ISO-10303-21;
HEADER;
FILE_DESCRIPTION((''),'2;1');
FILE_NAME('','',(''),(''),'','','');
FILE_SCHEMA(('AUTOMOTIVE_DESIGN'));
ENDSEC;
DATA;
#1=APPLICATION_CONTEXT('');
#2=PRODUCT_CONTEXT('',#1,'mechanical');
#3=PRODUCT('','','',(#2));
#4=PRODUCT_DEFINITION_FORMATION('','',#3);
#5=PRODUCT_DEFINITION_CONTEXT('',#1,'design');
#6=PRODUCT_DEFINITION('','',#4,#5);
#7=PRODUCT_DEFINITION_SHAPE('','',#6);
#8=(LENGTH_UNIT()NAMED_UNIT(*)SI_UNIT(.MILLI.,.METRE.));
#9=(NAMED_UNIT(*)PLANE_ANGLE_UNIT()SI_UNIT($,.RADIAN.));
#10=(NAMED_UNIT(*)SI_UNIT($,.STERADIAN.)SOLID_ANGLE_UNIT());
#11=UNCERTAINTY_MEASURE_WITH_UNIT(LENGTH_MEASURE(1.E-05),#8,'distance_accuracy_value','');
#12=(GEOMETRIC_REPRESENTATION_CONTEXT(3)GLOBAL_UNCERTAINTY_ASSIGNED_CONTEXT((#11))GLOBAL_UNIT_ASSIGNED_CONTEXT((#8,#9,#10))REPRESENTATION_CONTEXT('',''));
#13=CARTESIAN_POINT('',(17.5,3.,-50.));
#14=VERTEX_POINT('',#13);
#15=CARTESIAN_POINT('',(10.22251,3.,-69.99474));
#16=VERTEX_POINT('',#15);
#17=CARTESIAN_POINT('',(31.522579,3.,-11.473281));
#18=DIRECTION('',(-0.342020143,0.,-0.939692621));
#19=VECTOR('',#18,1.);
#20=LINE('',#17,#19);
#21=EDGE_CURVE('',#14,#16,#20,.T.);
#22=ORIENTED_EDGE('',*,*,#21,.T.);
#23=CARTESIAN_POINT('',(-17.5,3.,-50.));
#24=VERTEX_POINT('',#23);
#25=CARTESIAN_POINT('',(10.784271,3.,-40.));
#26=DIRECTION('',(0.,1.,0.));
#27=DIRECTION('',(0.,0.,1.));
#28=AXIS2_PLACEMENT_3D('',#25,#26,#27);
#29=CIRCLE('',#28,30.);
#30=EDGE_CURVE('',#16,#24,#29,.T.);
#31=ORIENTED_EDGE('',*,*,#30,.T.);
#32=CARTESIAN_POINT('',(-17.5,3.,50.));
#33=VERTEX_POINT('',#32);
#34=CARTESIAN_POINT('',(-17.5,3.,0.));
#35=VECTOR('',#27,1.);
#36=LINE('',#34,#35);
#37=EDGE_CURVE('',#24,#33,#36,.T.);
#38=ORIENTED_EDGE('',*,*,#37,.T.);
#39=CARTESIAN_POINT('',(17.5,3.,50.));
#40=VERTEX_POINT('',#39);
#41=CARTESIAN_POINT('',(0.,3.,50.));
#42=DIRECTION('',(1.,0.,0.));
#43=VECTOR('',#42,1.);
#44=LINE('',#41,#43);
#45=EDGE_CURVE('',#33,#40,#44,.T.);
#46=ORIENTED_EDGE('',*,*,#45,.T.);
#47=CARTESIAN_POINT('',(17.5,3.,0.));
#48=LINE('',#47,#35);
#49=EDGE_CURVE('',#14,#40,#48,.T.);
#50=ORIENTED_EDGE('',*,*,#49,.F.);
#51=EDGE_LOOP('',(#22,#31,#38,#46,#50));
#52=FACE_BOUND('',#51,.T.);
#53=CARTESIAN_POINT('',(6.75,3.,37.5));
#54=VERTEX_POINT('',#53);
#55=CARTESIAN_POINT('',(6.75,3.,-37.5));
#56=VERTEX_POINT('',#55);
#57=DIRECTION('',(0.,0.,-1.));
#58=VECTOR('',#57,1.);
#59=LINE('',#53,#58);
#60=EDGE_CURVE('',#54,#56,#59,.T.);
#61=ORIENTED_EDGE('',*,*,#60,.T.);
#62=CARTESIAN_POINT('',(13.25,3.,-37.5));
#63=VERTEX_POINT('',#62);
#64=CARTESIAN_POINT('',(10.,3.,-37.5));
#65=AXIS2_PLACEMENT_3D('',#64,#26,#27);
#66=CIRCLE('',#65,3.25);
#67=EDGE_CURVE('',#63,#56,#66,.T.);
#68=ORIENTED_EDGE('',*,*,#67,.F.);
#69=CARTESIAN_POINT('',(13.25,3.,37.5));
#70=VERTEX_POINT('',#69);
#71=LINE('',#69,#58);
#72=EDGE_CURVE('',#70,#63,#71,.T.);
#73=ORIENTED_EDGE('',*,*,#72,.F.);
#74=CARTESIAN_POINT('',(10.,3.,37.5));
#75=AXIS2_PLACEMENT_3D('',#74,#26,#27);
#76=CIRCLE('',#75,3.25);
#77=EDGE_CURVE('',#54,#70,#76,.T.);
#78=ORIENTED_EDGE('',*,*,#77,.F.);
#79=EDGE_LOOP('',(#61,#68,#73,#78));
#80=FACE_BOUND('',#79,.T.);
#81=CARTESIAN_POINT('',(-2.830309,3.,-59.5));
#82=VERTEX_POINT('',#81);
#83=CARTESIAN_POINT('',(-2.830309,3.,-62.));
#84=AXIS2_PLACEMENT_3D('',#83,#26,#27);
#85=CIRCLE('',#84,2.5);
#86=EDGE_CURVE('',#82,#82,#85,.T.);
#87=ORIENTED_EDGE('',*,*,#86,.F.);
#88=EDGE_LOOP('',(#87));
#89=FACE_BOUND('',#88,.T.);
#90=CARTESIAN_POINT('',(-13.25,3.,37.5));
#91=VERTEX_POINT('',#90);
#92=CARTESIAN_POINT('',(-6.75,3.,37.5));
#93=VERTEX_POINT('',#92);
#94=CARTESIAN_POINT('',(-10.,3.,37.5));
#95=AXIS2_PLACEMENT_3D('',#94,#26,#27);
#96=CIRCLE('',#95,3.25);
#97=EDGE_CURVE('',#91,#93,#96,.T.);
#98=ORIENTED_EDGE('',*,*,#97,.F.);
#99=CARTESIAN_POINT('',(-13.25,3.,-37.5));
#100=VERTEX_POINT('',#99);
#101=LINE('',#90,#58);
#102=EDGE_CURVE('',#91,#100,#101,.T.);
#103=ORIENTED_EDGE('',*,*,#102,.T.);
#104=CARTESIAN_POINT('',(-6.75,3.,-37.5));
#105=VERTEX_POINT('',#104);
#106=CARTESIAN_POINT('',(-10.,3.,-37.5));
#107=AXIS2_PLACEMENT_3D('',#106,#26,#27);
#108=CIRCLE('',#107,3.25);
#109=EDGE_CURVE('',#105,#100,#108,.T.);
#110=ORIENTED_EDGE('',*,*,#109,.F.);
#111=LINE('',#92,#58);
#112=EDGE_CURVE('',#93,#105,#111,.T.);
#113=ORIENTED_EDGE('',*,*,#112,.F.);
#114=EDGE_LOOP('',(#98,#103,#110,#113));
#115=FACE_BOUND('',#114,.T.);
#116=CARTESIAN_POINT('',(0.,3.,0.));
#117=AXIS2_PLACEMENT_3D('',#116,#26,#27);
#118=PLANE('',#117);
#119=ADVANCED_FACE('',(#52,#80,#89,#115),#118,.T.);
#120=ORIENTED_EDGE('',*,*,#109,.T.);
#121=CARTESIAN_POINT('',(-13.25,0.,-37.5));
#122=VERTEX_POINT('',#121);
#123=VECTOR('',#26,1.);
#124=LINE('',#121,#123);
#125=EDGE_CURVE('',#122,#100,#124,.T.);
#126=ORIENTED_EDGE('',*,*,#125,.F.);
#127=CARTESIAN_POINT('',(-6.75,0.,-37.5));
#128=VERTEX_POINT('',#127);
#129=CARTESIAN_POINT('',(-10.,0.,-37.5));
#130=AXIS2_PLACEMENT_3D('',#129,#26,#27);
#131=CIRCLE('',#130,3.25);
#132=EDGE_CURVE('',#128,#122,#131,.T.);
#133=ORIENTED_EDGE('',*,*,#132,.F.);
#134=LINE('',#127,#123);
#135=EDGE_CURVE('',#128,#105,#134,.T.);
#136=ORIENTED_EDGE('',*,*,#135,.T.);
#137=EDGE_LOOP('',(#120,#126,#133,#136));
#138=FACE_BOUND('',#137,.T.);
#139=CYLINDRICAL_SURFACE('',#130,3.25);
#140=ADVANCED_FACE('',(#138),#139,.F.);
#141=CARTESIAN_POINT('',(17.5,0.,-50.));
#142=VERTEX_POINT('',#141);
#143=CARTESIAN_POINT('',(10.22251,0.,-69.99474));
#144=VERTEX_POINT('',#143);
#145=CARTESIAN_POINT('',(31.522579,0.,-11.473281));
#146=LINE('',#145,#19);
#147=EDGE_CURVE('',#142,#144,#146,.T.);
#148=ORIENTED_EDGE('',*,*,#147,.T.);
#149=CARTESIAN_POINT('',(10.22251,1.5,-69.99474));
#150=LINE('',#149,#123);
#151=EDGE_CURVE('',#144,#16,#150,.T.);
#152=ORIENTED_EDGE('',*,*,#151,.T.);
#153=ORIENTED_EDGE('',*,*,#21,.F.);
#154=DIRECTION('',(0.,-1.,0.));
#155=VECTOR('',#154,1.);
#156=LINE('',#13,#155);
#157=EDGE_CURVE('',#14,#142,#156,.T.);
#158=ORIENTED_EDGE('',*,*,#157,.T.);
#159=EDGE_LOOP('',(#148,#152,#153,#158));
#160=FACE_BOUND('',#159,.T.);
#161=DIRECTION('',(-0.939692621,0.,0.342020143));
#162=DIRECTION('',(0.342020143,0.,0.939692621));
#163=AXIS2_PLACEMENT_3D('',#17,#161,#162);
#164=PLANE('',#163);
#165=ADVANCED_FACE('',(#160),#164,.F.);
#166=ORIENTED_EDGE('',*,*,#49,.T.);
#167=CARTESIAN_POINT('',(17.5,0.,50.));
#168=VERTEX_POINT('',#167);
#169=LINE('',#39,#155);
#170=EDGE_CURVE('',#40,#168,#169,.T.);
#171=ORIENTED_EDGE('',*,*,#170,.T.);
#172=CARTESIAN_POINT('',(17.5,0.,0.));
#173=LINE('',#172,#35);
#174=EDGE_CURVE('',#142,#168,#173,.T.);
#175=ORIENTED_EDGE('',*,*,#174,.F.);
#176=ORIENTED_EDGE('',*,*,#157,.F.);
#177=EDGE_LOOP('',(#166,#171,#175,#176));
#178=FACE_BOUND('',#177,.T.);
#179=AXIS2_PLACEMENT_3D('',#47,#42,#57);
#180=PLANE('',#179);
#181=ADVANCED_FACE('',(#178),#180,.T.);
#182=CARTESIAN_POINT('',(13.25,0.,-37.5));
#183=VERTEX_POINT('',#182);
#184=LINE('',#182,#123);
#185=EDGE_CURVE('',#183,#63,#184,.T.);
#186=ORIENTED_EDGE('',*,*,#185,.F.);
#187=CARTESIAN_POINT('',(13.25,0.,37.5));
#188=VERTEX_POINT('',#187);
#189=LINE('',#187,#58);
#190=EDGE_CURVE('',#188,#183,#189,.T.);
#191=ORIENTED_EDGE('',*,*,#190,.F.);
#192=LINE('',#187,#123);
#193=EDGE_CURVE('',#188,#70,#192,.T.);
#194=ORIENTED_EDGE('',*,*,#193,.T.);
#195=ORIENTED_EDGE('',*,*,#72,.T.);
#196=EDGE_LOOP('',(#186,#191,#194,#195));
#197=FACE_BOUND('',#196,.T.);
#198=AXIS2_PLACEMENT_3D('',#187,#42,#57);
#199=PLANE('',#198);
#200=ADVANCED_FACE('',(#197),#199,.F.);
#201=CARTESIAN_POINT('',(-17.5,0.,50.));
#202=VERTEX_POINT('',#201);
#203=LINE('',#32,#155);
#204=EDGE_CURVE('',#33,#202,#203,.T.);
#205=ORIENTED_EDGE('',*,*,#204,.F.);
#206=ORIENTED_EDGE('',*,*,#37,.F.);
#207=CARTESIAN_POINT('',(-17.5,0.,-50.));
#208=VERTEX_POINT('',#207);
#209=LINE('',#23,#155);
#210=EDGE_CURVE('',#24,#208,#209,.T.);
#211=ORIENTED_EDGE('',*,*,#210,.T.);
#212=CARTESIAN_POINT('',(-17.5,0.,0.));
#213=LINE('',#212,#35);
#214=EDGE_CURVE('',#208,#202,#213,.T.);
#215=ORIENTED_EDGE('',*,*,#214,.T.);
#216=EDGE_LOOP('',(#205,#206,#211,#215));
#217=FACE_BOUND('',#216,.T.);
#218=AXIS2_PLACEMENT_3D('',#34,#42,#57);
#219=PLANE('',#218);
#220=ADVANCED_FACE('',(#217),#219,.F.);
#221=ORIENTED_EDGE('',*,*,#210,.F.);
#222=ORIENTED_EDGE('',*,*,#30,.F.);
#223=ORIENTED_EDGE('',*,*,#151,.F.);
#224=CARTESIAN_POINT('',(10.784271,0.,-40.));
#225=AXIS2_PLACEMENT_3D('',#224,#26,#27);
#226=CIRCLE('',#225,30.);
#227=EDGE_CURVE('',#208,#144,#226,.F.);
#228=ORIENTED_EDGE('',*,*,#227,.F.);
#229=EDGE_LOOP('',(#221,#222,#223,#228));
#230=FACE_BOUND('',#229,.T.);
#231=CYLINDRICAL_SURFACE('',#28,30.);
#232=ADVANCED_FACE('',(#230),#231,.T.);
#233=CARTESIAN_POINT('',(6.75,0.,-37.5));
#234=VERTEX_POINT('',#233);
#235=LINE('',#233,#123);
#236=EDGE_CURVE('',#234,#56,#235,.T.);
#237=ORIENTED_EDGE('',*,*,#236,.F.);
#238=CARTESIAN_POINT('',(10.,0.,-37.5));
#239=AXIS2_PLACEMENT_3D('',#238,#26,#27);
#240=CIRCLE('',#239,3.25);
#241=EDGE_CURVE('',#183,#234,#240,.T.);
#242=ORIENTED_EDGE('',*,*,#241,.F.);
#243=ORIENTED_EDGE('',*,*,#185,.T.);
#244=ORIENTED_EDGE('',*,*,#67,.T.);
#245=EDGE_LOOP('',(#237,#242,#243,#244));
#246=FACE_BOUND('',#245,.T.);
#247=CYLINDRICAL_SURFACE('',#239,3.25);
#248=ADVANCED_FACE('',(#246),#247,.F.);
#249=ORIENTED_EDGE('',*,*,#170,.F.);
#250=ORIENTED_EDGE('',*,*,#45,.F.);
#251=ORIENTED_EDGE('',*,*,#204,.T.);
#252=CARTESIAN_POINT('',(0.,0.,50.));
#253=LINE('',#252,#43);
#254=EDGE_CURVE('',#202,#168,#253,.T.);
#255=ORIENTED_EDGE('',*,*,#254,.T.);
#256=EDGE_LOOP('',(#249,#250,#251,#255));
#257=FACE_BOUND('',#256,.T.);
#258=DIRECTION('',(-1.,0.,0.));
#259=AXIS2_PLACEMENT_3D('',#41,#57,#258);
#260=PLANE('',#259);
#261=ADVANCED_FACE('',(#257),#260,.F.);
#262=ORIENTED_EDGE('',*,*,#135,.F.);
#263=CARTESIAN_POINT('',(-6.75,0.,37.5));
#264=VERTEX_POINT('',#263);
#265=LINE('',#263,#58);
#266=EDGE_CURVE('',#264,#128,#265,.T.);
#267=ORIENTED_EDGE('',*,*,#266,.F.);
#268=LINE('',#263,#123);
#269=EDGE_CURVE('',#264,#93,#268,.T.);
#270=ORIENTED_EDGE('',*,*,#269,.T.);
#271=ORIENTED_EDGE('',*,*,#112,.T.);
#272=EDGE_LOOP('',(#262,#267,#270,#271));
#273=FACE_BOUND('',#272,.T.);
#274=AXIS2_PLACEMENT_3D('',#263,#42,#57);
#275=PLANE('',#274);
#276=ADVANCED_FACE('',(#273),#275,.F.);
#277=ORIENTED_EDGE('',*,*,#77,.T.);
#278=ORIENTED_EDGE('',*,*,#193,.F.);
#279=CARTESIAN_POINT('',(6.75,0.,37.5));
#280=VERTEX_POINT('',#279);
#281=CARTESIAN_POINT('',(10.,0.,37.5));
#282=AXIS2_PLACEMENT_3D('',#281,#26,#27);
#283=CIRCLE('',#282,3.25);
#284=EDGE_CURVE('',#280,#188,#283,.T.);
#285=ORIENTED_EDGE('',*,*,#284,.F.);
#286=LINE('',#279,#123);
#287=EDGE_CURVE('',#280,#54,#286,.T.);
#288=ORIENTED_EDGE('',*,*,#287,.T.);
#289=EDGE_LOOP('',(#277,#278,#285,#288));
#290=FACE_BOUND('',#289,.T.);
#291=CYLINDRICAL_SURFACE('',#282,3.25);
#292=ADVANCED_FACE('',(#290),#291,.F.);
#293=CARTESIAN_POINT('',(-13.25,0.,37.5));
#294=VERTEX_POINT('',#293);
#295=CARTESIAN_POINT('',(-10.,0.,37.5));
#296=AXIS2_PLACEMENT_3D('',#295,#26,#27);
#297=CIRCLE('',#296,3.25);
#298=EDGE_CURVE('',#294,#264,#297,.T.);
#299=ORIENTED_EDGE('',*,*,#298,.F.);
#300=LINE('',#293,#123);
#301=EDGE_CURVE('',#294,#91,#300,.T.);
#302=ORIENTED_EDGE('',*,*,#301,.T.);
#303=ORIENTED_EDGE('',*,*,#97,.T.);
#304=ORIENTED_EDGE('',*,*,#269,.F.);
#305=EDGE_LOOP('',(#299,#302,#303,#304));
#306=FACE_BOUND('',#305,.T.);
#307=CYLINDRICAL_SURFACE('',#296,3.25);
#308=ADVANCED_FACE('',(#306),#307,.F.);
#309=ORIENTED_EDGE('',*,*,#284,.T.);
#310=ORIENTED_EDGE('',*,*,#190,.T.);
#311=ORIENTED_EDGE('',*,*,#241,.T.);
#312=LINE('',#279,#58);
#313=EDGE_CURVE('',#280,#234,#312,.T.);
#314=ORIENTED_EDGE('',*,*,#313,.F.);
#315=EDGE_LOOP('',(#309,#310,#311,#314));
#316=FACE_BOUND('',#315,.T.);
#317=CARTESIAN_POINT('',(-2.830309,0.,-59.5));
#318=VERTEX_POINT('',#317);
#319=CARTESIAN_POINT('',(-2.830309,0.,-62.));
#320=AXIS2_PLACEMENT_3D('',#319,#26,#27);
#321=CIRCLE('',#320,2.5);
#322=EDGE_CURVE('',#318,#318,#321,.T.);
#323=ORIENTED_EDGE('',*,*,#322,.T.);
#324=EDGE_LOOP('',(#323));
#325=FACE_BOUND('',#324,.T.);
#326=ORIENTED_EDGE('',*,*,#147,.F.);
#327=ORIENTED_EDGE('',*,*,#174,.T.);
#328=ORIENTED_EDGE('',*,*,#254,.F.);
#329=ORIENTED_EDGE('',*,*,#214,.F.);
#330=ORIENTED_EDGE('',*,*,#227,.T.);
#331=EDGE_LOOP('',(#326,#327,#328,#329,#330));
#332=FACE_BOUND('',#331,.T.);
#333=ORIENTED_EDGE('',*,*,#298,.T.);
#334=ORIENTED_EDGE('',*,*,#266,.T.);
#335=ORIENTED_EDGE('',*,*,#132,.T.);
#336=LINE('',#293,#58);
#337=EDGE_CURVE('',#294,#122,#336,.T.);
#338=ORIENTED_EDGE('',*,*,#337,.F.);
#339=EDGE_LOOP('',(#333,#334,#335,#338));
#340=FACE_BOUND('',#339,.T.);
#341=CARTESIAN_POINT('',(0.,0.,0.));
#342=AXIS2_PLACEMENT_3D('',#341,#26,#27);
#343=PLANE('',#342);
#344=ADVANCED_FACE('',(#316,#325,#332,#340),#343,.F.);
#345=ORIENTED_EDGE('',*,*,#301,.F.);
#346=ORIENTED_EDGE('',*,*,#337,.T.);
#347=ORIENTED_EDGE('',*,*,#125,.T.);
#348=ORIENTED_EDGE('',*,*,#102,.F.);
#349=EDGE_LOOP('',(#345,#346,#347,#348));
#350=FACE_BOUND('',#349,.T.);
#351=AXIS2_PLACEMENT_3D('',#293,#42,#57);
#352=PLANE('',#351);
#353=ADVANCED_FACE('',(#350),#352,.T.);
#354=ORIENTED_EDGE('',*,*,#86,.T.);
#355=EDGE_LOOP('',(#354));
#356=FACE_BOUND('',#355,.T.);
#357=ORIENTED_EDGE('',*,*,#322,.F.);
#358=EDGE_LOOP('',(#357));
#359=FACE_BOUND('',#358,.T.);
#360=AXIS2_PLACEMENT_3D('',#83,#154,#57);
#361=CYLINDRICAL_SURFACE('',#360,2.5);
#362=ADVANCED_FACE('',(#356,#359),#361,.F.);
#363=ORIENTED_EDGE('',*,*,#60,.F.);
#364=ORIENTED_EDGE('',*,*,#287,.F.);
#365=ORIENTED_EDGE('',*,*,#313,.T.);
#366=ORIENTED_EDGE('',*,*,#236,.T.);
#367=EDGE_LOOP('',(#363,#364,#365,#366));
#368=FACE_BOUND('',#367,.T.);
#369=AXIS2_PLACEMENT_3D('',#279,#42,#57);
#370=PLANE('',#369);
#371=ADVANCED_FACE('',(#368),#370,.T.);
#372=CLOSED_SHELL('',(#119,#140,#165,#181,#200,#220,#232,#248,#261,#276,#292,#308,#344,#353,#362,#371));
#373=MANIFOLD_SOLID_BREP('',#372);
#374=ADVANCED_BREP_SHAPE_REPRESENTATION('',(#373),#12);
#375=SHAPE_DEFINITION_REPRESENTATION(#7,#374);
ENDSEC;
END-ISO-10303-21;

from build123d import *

# Parameters (mm, degrees)
SKETCH1_W           = 35
SKETCH1_H           = 100
SKETCH1_R           = 2.5
BOSS_EXTRUDE1_DEPTH = 3
CUT_EXTRUDE2_DEPTH  = 75.317016198
FILLET1_R           = 30


with BuildPart() as part:
    # Sketch1 → Boss-Extrude1 (new body)
    # profile 1 of 2: a face of its own
    with BuildSketch(Plane(origin=(0, 0, 0), x_dir=(1, 0, 0), z_dir=(0, 1, 0))):
        Rectangle(SKETCH1_W, SKETCH1_H)
    # profile 2 of 2: a face of its own
    with BuildSketch(Plane(origin=(0, 0, 0), x_dir=(1, 0, 0), z_dir=(0, 1, 0))):
        Polygon((17.5, 50), (10.220595315, 70), (-24.779404685, 70), (-17.5, 50), align=None)
        with Locations(Location((-2.830309398, 62, 0), (0, 0, 270))):
            Circle(SKETCH1_R, mode=Mode.SUBTRACT)
    extrude(amount=BOSS_EXTRUDE1_DEPTH)

    # Sketch3 → Cut-Extrude2 (cut, through all)
    with BuildSketch(Plane(origin=(0, 3, 0), x_dir=(1, 0, 0), z_dir=(0, 1, 0))):
        with BuildLine():
            Line((-13.25, -37.5), (-13.25, 37.5))
            ThreePointArc((-13.25, 37.5), (-10, 40.75), (-6.75, 37.5))
            Line((-6.75, 37.5), (-6.75, -37.5))
            ThreePointArc((-6.75, -37.5), (-10, -40.75), (-13.25, -37.5))
        make_face()
        with BuildLine():
            Line((6.75, -37.5), (6.75, 37.5))
            ThreePointArc((6.75, 37.5), (10, 40.75), (13.25, 37.5))
            Line((13.25, 37.5), (13.25, -37.5))
            ThreePointArc((13.25, -37.5), (10, -40.75), (6.75, -37.5))
        make_face()
    extrude(amount=-CUT_EXTRUDE2_DEPTH, mode=Mode.SUBTRACT)

    # Fillet1
    # the kernel refuses this fillet: 30 mm, written as the material it takes off along each edge
    with BuildSketch(Plane(origin=(-24.779404685, -88.909189832, -70), x_dir=(1, 0, 0), z_dir=(0, 1, 0))) as fillet1_piece_1:
        with BuildLine():
            CenterArc((35.563675933, -30), FILLET1_R, 90, 70.528779366)
            Line((7.279404685, -20), (0, 0))
            Line((0, 0), (35.563675933, 0))
        make_face()
    extrude(amount=180.818379664, mode=Mode.SUBTRACT)


solid = part.part
